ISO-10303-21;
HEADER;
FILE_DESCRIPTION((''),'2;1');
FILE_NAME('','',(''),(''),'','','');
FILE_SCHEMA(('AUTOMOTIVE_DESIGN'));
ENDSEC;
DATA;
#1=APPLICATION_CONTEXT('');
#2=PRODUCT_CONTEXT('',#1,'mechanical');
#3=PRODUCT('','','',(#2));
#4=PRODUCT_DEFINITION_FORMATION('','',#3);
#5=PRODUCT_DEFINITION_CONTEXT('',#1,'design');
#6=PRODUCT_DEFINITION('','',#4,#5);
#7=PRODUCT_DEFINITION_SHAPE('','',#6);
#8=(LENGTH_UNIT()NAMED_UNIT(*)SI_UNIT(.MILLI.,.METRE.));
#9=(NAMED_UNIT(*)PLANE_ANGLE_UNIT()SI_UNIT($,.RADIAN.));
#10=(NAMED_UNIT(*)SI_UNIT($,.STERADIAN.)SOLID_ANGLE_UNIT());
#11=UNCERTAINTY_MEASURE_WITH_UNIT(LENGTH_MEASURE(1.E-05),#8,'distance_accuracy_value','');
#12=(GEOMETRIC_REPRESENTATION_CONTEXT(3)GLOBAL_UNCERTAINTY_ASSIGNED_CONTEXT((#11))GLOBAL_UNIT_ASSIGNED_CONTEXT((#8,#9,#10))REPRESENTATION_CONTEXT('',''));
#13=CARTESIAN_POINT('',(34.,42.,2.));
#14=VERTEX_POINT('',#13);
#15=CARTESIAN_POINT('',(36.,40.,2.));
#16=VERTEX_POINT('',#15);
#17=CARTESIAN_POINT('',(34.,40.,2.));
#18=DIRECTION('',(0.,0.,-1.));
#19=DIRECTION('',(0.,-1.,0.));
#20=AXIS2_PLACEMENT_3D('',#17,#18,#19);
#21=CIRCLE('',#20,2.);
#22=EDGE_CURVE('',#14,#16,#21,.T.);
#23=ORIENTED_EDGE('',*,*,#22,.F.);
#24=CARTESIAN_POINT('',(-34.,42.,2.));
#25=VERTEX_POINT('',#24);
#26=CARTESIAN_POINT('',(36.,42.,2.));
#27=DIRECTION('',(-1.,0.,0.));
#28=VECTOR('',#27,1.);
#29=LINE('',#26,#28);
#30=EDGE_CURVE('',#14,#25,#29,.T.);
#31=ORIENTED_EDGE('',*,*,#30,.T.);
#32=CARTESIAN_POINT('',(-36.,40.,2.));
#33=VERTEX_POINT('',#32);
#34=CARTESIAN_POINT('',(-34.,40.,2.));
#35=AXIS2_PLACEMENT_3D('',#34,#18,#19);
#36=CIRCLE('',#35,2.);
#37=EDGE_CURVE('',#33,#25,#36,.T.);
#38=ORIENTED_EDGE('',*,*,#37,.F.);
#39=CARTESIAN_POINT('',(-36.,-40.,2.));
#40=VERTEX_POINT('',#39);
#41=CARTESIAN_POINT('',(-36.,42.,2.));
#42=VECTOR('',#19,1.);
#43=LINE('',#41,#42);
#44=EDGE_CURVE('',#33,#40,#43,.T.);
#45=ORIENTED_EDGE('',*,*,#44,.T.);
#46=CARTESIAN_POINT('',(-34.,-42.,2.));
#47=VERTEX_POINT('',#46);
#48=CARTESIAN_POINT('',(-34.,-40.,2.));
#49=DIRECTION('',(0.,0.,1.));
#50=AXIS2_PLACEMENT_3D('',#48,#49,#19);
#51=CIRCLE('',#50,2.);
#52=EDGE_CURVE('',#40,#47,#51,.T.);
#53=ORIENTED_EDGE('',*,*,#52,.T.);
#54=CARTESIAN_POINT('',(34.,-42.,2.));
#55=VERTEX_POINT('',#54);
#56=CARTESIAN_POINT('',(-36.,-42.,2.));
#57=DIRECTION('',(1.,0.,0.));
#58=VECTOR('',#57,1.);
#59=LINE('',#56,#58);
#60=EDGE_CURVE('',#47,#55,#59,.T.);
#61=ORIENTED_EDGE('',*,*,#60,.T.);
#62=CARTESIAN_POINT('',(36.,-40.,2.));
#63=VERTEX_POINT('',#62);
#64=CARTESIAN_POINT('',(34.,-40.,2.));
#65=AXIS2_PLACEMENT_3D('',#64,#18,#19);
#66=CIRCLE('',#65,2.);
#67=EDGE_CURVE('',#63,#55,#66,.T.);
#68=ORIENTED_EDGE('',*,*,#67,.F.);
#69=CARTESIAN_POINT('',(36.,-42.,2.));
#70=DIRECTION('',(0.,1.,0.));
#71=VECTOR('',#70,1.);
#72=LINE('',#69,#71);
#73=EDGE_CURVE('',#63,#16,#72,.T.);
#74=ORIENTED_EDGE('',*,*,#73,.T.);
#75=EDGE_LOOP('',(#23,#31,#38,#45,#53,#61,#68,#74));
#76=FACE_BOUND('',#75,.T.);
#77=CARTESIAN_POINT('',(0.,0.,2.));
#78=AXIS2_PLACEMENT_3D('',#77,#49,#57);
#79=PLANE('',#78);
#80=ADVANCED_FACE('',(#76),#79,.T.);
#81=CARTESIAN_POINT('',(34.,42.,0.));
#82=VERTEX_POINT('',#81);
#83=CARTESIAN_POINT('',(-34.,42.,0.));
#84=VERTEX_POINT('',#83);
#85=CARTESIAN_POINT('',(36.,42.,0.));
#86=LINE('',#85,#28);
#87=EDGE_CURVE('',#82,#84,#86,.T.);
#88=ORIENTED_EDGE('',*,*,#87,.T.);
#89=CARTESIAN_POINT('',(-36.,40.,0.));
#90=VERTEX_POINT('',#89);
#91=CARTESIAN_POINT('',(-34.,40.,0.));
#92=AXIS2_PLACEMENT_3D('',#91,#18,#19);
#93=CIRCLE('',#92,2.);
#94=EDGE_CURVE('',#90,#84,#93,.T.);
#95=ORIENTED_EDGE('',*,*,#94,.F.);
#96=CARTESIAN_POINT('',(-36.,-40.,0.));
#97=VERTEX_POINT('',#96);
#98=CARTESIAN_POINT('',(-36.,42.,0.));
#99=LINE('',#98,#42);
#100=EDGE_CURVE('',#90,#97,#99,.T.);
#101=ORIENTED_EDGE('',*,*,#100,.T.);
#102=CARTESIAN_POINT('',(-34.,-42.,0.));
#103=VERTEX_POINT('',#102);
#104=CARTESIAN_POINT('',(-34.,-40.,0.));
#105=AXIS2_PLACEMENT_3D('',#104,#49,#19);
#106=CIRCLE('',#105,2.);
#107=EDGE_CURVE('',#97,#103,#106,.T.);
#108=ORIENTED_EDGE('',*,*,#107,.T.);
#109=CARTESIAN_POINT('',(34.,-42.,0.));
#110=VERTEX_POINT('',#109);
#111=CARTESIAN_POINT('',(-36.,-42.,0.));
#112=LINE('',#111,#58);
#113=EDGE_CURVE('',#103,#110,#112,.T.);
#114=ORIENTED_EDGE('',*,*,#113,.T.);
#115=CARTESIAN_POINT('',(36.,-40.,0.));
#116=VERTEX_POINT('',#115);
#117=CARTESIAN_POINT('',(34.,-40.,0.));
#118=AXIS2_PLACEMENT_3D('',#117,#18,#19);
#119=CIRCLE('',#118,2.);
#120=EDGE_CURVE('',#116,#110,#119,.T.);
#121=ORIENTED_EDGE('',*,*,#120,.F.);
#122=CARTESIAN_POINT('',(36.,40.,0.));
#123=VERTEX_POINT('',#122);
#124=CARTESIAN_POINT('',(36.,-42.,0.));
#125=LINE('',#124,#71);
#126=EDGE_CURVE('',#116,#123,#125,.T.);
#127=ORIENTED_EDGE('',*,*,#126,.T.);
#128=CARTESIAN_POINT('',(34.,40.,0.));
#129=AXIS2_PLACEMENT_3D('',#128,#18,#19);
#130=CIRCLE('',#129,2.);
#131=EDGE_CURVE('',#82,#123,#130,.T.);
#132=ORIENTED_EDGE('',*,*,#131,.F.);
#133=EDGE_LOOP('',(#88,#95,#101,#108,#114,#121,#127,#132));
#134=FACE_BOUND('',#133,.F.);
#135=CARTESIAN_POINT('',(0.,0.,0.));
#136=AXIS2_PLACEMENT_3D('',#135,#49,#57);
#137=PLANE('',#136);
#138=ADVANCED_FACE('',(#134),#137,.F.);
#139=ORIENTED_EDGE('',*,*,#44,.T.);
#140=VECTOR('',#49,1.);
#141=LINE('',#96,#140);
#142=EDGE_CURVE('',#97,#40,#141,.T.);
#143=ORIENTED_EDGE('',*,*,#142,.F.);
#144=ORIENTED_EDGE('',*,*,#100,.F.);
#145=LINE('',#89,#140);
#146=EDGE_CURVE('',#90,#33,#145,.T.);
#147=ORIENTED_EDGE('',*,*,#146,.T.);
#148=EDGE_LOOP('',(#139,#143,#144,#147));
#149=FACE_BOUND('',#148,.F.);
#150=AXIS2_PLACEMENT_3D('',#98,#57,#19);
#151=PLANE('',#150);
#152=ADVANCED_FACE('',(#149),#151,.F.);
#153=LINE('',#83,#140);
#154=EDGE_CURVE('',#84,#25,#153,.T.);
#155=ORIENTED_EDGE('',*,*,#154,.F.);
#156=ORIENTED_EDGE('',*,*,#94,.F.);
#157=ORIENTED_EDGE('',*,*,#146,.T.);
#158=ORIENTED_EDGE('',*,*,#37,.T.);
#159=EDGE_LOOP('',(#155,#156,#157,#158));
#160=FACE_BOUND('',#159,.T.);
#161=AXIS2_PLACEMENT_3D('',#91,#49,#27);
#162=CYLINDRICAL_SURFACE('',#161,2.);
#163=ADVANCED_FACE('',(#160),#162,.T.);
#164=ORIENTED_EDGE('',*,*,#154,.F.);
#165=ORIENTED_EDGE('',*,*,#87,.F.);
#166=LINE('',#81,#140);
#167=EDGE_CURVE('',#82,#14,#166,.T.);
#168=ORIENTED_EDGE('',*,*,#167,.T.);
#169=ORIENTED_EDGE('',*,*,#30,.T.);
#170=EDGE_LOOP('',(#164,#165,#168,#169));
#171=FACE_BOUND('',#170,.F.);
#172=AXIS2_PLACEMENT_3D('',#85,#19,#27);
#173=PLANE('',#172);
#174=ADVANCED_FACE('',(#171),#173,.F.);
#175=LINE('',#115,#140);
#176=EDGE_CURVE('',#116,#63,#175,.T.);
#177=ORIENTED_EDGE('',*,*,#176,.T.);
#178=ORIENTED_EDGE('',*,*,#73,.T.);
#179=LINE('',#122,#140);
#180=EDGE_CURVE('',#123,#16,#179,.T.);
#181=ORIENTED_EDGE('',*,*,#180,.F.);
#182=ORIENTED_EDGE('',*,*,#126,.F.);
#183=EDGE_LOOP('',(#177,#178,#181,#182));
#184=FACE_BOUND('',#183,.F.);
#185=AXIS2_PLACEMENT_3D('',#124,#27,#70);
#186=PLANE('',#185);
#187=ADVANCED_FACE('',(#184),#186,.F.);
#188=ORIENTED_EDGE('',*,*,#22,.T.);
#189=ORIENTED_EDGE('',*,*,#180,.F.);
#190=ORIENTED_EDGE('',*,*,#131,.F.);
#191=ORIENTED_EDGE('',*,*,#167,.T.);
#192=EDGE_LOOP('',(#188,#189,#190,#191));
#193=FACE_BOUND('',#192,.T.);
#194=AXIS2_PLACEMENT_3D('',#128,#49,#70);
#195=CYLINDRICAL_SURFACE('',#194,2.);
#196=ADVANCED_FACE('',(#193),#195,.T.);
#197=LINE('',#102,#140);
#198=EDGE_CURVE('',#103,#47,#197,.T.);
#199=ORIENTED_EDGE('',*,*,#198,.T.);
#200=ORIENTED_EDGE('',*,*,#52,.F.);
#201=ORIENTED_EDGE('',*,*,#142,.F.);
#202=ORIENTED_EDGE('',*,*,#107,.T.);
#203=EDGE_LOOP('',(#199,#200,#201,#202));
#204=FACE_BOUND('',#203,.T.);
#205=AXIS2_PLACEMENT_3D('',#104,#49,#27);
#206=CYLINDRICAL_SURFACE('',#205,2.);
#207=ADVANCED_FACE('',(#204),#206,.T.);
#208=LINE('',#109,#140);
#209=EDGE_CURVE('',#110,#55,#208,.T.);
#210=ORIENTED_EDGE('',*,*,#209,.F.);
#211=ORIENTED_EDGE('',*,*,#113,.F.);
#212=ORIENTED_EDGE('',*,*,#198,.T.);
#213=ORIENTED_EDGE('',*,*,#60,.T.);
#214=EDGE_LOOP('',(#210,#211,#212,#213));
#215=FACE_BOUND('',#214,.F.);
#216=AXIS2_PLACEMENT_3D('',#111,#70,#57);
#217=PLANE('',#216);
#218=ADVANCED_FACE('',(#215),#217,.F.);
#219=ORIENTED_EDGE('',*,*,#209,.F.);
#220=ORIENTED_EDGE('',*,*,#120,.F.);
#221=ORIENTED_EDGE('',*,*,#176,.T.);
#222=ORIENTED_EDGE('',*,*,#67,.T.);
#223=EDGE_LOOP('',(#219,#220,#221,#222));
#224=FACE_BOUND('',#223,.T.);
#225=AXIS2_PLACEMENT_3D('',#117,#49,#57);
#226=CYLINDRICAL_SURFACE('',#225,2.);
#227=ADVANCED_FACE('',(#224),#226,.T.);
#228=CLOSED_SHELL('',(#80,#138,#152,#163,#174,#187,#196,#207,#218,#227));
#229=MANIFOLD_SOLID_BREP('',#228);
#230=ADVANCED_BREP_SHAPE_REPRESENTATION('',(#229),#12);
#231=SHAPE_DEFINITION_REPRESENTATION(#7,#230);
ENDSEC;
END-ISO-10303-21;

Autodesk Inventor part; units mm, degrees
ref_plane "YZ Plane" through (0, 0, 0) normal (1, 0, 0) x (0, 1, 0)
ref_plane "XZ Plane" through (0, 0, 0) normal (0, 1, 0) x (-1, 0, 0)
ref_plane "XY Plane" through (0, 0, 0) normal (0, 0, 1) x (1, 0, 0)
sketch "Sketch1" plane through (0, 0, 0) normal (0, 0, 1) x (1, 0, 0)
  line L0 (-36, -42) -> (36, -42)
  line L1 (36, -42) -> (36, 42)
  line L2 (36, 42) -> (-36, 42)
  line L3 (-36, 42) -> (-36, -42)
  line L4 (-36, -42) -> (36, 42) construction
  line L5 (36, -42) -> (-36, 42) construction
  point P0 (0, 0)
  dimension "d154" = 72
  dimension "d155" = 84
extrude "Plate5" add sketch "Sketch1" along normal blind 2
fillet "Corner Round1" radius 2 4 edges at (36, 42, 1) (36, -42, 1) (-36, -42, 1) (-36, 42, 1)
sketch "Sketch11" plane through (-50.5, -22, -28) normal (1, 0, 0) x (0, 0, -1)
  line L0 (-25.25, 44) -> (-25.25, 0) construction
  line L1 (0, 0) -> (-25.25, 0) construction
  line L2 (0, 0) -> (0, 44) construction
  line L3 (0, 44) -> (-25.25, 44) construction
  circle A0 centre (-10, 22) radius 5.5
  point P0 (-28, 22)
  point P1 (0, 22)
  dimension "d192" = 11
  dimension "d193" = 10
cut "Cut3" [suppressed]
feature "Corner Round3" [suppressed]
sketch "Sketch10" plane through (-38, 40, 2) normal (1, 0, 0) x (0, 1, 0)
  line L0 (-80, 0) -> (0, 0)
  line L1 (0, 0) -> (0, -30)
  line L2 (0, -30) -> (-80, -30)
  line L3 (-80, -30) -> (-80, 0)
properties part number "ANP 1424 FDS diam way cup" material "Stainless Steel"
